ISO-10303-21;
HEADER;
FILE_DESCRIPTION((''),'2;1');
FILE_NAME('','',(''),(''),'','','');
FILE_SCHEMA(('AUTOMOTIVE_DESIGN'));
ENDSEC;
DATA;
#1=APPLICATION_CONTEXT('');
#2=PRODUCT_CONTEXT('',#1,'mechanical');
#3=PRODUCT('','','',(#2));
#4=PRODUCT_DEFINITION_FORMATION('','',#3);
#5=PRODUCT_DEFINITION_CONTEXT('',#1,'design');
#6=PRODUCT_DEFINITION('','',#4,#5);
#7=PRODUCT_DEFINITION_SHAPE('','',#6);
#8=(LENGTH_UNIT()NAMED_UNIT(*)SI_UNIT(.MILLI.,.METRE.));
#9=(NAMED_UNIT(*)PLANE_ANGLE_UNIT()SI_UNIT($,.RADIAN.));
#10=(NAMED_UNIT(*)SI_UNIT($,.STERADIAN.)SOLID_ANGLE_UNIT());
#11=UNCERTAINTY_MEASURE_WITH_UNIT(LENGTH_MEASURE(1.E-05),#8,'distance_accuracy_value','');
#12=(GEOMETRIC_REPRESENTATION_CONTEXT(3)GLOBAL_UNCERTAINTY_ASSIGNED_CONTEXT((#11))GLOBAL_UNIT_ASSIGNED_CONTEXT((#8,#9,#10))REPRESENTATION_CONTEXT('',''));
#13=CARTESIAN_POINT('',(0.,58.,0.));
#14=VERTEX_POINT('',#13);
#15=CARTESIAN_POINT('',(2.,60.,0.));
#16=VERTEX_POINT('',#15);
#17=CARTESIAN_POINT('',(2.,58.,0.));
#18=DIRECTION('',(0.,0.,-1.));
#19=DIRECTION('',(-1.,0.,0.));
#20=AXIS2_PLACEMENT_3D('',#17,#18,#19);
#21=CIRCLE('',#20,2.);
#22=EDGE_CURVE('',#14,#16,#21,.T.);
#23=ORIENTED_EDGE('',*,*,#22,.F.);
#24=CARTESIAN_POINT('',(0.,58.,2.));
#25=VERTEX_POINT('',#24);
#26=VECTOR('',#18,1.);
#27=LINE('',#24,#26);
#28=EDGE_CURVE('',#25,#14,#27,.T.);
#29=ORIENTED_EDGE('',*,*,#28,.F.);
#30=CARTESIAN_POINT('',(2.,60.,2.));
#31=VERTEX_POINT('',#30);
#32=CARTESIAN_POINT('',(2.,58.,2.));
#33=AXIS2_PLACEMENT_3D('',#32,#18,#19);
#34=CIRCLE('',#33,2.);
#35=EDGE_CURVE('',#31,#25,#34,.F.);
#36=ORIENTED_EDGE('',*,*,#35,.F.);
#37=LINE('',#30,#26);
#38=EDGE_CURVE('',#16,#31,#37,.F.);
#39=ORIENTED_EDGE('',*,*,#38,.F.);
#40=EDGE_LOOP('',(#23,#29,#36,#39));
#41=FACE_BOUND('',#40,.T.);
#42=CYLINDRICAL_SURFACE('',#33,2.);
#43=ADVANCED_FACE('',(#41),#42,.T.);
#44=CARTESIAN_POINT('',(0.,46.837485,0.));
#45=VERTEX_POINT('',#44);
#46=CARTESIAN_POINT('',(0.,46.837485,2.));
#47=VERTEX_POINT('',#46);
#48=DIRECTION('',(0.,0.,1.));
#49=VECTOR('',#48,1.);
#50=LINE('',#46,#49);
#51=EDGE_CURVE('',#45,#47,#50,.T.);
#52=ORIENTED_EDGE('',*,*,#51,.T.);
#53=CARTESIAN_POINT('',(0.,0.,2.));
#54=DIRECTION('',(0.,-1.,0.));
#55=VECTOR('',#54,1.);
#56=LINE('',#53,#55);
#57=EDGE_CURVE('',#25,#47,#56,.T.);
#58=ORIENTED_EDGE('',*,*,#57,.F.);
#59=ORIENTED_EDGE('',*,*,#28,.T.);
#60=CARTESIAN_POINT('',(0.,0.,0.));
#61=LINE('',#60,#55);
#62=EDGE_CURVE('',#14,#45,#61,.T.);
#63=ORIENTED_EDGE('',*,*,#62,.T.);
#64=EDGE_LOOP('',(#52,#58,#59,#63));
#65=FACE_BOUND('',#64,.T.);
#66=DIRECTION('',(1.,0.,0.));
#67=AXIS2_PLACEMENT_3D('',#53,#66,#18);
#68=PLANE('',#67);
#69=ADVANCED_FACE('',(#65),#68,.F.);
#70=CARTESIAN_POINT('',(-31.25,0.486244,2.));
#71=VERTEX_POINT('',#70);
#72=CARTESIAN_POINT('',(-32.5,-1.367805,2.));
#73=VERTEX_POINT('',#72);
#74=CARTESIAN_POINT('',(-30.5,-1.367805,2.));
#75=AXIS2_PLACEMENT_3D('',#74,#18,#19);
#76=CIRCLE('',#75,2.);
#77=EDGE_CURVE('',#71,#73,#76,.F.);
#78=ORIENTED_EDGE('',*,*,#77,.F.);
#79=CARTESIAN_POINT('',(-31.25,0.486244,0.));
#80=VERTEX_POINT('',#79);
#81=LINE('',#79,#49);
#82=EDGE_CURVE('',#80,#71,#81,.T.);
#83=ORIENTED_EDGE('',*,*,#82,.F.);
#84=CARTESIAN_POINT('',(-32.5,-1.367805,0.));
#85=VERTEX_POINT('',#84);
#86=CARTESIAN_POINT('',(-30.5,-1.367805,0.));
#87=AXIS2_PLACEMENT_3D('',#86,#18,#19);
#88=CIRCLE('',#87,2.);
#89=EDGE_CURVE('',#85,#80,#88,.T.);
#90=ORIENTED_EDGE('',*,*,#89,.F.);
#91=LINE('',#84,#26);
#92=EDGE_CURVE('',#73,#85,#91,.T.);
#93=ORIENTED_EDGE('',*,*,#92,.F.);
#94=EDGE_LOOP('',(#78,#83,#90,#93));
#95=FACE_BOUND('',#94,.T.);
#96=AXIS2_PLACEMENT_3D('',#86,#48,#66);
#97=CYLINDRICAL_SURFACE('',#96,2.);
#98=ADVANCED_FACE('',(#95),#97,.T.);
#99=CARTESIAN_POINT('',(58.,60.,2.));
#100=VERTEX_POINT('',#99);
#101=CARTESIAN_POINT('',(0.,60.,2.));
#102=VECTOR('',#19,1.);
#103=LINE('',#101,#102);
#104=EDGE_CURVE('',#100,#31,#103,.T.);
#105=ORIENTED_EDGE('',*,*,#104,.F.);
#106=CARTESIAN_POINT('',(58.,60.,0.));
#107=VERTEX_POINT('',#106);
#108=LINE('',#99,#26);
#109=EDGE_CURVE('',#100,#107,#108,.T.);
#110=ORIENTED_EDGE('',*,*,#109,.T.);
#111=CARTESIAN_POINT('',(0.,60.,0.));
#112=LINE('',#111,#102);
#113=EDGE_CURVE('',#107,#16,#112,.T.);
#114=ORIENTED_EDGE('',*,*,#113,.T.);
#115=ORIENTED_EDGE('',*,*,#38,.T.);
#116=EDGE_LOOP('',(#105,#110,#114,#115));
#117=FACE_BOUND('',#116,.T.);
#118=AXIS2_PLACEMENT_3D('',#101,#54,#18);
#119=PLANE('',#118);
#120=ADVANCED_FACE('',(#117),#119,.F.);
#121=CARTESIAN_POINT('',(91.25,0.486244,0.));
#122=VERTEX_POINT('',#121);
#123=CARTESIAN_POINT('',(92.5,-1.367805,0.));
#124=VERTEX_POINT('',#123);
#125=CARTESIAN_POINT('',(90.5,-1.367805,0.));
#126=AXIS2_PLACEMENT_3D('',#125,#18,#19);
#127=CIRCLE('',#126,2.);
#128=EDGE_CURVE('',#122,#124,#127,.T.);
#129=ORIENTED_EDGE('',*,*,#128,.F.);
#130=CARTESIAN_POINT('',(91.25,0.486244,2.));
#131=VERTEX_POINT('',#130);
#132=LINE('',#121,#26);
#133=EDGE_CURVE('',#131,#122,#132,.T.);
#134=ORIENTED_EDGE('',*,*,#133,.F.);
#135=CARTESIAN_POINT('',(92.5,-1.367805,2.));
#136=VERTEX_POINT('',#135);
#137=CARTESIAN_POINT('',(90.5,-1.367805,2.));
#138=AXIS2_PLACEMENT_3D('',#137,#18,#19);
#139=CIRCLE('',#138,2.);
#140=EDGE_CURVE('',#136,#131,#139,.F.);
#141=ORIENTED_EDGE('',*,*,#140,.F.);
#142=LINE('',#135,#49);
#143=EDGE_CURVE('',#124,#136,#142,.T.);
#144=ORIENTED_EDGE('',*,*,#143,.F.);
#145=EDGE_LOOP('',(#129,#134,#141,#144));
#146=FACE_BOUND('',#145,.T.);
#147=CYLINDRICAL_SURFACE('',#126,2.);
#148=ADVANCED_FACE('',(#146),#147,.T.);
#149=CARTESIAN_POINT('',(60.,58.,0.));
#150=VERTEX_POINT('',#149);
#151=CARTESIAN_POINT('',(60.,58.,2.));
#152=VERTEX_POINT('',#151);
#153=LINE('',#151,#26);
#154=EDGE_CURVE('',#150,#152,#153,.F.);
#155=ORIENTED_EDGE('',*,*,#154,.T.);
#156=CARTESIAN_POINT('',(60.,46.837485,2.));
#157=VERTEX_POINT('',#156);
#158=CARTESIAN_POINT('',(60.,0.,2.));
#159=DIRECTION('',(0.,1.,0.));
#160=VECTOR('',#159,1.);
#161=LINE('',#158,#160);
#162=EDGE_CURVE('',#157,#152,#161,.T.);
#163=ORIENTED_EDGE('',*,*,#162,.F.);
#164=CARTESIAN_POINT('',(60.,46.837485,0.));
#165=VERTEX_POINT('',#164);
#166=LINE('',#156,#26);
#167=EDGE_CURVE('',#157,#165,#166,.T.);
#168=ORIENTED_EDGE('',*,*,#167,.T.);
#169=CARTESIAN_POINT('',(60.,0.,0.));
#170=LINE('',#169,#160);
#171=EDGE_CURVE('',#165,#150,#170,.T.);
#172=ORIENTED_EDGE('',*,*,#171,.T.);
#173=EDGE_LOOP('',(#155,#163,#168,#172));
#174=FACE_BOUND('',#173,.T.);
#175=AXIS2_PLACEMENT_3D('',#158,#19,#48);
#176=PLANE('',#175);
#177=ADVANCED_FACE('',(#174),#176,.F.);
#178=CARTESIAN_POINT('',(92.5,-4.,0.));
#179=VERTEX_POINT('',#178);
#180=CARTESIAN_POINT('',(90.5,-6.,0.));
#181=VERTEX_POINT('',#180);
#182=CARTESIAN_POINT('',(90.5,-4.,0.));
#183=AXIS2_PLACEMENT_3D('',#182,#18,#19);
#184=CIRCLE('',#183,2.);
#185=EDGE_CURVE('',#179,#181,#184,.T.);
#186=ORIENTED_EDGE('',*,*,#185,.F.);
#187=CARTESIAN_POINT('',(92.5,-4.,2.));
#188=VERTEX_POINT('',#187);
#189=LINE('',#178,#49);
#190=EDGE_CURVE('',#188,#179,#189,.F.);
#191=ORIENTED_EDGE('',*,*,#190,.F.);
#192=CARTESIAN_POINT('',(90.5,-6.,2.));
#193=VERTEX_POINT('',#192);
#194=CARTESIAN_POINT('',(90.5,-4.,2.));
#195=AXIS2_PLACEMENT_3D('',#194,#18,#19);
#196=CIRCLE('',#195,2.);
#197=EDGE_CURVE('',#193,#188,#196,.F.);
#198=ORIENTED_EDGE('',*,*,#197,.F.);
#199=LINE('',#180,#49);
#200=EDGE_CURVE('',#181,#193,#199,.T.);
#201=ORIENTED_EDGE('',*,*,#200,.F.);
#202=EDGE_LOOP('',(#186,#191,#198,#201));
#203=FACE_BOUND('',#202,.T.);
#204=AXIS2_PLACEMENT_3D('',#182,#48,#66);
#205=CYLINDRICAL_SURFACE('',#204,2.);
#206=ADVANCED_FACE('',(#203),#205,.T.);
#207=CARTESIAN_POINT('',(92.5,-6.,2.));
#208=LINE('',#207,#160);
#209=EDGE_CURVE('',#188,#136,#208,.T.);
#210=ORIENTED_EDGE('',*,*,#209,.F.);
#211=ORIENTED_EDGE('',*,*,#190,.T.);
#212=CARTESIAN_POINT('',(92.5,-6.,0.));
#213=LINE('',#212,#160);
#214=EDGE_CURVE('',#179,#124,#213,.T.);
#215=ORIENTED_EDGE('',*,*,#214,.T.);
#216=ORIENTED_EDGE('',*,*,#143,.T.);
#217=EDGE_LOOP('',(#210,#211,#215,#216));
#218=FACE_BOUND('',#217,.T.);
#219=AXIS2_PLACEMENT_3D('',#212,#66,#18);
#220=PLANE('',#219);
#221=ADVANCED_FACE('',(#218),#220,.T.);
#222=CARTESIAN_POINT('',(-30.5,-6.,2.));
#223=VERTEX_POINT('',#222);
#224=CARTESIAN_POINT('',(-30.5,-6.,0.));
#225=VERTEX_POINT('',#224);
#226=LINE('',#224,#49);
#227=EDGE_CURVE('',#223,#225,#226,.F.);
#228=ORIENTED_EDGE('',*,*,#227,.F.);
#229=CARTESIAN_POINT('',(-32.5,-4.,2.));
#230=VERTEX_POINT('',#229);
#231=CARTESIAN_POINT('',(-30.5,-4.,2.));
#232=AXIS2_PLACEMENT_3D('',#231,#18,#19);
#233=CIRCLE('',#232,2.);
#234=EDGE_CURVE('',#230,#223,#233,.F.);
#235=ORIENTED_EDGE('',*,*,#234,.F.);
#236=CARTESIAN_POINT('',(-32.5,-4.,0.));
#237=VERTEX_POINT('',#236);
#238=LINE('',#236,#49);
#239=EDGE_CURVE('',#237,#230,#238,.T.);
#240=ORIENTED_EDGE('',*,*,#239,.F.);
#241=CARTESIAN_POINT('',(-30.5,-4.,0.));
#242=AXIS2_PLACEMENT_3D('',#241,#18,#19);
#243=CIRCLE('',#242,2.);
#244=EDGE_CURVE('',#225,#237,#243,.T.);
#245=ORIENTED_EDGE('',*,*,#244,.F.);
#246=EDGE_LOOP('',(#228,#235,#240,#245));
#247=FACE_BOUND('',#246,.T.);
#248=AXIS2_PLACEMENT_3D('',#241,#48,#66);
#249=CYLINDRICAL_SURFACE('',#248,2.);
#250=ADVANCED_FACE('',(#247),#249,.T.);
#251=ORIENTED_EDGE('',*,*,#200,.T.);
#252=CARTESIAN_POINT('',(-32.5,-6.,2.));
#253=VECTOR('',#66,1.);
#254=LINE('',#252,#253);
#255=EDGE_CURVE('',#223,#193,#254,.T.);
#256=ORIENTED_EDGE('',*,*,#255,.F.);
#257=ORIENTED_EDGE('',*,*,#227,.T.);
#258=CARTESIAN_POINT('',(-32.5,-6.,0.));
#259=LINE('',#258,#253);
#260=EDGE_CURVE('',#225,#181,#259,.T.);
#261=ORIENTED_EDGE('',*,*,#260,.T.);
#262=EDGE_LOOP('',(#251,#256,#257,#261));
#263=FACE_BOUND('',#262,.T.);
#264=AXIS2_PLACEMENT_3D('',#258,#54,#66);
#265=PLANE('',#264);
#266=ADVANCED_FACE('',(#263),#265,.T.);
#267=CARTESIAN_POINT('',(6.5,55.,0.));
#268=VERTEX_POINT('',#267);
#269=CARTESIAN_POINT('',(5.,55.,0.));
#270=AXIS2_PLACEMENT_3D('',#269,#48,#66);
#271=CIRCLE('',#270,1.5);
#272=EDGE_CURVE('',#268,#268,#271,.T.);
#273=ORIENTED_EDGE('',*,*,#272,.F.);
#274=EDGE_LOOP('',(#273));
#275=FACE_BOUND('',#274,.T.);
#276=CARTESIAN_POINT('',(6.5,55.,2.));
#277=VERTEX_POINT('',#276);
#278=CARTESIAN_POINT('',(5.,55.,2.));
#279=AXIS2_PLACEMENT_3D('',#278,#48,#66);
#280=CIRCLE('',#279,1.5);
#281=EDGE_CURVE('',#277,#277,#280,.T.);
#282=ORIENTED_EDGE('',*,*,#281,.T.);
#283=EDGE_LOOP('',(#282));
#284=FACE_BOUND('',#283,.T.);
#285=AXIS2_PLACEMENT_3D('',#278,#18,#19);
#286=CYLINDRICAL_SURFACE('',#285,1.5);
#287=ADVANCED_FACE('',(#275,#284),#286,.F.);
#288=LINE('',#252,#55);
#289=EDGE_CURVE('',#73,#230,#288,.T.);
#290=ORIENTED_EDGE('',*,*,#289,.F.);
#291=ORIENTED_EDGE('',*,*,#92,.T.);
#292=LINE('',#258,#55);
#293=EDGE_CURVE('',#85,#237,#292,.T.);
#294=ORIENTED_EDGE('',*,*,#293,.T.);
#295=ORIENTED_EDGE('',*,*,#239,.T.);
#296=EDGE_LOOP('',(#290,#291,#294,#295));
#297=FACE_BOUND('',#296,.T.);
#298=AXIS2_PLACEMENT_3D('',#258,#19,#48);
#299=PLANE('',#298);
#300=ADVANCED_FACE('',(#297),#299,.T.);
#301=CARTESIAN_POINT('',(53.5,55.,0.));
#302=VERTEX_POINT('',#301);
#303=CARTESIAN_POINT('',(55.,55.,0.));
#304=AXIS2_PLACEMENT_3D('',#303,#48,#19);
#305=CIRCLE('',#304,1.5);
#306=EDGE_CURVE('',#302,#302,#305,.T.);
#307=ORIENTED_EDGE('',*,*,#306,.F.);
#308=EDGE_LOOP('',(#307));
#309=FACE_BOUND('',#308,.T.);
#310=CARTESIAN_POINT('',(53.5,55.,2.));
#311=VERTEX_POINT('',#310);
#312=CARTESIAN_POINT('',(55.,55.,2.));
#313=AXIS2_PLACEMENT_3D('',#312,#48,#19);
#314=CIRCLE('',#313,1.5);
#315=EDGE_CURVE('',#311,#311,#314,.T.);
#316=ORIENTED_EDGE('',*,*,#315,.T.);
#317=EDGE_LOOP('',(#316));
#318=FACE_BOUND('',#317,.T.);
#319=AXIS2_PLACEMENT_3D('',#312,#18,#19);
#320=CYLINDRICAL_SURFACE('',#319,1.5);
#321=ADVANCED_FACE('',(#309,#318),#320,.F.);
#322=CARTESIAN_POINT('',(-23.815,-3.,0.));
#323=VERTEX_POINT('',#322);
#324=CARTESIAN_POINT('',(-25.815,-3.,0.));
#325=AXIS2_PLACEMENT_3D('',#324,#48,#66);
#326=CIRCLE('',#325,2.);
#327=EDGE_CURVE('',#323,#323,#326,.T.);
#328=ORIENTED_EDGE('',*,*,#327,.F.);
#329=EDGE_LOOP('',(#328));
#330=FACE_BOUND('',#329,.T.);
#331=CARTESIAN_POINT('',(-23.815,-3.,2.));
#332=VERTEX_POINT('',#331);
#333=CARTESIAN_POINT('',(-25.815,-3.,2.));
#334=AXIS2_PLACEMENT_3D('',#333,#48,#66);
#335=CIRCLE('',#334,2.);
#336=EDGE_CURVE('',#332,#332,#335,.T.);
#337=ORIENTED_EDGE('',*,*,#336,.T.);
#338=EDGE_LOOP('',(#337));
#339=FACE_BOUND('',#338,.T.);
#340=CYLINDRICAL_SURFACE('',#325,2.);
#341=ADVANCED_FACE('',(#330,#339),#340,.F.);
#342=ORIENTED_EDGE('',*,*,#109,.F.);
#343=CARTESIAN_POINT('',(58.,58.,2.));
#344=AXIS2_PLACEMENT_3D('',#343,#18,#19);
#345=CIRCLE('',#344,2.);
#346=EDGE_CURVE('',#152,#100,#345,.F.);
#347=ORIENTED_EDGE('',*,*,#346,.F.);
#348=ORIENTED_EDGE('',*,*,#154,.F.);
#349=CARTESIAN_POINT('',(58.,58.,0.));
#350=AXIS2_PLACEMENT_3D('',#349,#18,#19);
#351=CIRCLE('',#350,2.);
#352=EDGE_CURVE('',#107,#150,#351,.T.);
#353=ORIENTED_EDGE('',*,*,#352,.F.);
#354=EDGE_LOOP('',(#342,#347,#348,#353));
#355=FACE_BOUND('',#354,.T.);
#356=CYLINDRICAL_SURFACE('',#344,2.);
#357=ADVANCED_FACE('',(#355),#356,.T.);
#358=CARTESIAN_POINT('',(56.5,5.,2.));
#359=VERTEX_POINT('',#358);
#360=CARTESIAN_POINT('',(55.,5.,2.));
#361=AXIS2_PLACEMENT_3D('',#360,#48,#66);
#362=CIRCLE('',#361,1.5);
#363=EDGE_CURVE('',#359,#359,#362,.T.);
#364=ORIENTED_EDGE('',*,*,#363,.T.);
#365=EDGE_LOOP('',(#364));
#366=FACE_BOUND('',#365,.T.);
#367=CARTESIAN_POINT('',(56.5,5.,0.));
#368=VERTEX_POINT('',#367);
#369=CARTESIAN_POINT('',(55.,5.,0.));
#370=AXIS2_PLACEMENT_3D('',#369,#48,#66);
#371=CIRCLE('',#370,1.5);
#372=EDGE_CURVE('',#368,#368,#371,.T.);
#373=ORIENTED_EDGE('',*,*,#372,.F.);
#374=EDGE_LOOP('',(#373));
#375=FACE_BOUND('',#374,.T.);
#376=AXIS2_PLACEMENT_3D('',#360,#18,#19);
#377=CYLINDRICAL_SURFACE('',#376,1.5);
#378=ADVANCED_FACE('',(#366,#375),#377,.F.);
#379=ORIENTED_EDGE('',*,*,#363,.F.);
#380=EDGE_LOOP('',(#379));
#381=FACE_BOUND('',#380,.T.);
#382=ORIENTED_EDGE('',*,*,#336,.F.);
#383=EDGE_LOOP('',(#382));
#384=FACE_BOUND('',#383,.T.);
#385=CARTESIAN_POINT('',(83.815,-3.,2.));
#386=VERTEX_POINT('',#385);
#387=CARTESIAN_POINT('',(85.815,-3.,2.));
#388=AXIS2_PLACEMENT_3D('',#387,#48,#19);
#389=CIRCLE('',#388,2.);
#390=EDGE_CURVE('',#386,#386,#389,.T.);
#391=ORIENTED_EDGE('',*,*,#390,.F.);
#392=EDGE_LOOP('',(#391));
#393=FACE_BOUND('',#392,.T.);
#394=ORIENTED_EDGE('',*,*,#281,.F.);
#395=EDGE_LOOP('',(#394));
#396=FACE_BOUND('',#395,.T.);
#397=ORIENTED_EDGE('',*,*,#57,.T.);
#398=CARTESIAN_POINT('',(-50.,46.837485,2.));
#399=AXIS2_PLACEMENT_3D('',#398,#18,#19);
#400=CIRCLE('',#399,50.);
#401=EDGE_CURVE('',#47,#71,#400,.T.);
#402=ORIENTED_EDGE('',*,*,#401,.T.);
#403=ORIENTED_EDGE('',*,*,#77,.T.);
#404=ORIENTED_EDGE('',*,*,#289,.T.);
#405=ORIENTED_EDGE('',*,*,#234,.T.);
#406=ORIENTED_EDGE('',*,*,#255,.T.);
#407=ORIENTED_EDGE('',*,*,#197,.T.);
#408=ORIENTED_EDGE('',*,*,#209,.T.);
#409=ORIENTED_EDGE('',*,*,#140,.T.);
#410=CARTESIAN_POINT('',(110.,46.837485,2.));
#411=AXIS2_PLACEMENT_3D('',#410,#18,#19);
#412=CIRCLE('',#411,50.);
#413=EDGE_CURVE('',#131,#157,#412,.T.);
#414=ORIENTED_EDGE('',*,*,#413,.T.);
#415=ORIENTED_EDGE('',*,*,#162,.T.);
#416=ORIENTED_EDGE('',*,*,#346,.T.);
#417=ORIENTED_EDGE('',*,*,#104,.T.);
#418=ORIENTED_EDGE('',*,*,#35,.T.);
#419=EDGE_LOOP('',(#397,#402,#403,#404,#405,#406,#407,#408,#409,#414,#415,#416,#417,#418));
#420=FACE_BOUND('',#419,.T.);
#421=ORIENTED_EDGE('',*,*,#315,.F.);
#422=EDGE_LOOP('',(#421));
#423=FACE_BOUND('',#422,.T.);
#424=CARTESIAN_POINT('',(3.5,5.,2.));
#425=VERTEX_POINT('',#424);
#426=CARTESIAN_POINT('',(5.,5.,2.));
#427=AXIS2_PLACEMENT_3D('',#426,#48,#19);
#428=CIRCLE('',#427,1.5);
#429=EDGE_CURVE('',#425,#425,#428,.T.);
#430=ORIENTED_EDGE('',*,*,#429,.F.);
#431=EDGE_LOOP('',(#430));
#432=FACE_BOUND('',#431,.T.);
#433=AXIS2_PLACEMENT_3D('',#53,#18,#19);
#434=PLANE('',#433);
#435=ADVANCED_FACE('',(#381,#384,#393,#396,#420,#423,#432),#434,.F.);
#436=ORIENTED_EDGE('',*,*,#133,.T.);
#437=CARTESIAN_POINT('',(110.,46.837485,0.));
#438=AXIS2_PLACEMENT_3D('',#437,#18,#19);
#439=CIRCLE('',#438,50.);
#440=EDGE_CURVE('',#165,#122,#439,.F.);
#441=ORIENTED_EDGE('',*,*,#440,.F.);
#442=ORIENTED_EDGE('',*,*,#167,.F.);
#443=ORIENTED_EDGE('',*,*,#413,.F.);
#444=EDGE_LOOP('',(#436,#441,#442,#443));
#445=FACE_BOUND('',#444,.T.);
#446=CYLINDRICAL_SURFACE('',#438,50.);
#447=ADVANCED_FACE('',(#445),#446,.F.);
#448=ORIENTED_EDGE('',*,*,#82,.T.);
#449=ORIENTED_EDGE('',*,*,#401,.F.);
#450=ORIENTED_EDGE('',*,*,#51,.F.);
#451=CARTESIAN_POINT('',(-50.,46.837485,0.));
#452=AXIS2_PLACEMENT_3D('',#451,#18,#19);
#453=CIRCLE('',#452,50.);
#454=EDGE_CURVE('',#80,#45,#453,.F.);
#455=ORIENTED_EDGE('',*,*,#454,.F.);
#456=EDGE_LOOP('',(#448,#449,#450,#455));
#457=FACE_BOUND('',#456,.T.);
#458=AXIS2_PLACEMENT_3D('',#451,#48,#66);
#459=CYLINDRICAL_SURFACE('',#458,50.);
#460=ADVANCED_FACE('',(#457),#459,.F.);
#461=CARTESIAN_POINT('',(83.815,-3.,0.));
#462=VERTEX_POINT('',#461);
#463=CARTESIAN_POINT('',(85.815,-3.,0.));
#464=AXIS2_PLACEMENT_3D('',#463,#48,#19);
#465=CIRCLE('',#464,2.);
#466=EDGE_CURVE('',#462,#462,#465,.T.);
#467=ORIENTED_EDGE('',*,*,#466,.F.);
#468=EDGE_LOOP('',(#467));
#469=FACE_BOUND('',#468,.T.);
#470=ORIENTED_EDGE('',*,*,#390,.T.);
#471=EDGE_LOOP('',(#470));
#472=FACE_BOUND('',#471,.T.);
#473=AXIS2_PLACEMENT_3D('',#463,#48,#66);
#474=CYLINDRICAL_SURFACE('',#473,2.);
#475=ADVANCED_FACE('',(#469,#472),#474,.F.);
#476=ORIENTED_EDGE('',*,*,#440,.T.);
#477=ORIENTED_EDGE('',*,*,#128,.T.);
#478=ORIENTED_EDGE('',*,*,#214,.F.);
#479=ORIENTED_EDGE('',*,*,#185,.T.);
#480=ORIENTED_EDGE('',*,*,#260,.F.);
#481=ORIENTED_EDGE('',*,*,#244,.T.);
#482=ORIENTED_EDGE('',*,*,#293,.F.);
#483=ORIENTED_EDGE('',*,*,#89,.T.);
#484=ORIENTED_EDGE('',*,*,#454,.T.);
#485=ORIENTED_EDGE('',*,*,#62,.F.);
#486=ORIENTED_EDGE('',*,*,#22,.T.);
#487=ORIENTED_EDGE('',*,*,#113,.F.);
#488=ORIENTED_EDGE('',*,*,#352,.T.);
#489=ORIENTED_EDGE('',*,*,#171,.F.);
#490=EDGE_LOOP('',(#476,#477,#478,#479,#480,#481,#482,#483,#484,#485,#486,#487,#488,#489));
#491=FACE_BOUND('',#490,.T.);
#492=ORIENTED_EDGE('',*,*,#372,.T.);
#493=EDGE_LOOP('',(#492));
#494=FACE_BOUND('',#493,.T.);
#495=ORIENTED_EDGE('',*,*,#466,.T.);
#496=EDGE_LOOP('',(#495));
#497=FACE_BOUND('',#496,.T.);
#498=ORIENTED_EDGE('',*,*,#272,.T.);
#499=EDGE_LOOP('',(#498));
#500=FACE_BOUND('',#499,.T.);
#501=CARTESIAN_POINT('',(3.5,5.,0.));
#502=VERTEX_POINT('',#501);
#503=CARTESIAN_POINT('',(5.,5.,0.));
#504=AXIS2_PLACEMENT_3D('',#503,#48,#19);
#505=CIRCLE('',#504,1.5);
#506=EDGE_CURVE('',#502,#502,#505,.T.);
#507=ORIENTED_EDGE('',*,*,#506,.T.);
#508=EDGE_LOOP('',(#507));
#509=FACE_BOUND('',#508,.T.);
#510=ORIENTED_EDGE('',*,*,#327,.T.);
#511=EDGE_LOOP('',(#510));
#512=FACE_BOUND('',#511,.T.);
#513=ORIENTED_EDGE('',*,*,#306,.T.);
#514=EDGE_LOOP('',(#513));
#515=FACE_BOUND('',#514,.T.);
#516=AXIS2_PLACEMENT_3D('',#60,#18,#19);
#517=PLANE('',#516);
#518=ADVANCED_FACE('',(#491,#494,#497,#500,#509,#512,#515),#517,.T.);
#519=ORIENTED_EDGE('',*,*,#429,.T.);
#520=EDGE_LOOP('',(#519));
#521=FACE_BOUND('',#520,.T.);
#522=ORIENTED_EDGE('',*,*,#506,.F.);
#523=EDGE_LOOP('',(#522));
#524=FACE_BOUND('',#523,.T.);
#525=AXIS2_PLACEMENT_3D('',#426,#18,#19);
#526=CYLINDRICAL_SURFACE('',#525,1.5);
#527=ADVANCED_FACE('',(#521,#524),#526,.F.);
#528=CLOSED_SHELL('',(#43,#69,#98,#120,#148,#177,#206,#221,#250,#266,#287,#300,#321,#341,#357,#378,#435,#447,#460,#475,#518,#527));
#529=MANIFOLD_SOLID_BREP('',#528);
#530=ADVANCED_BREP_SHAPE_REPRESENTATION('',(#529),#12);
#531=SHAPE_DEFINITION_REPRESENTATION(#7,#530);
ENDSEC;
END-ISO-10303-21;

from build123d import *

# Parameters (mm, degrees)
SKETCH_1_W      = 60
SKETCH_1_H      = 60
SKETCH_1_R      = 1.5
EXTRUDE_1_DEPTH = 2
SKETCH_2_W      = 125
SKETCH_2_H      = 6
SKETCH_2_R      = 2
EXTRUDE_2_DEPTH = 2
FILLET_1_R      = 50
FILLET_2_R      = 2


with BuildPart() as part:
    # 草图1 → 凸台-拉伸1 (new body)
    with BuildSketch(Plane.XY):
        with Locations((30, 30)):
            Rectangle(SKETCH_1_W, SKETCH_1_H)
        with Locations((5, 55)):
            Circle(SKETCH_1_R, mode=Mode.SUBTRACT)
        with Locations(Location((55, 55, 0), (0, 0, 180))):
            Circle(SKETCH_1_R, mode=Mode.SUBTRACT)
        with Locations((55, 5)):
            Circle(SKETCH_1_R, mode=Mode.SUBTRACT)
        with Locations(Location((5, 5, 0), (0, 0, 180))):
            Circle(SKETCH_1_R, mode=Mode.SUBTRACT)
    extrude(amount=EXTRUDE_1_DEPTH)

    # 草图2 → 凸台-拉伸2 (add)
    with BuildSketch(Plane.XY.offset(2)):
        with Locations((30, -3)):
            Rectangle(SKETCH_2_W, SKETCH_2_H)
        with Locations((-25.815, -3)):
            Circle(SKETCH_2_R, mode=Mode.SUBTRACT)
        with Locations(Location((85.815, -3, 0), (0, 0, 180))):
            Circle(SKETCH_2_R, mode=Mode.SUBTRACT)
    extrude(amount=-EXTRUDE_2_DEPTH)

    # 圆角1
    # the kernel refuses this fillet: 50 mm, written as the material it adds along each edge
    with BuildSketch(Plane(origin=(60, 0, 0), x_dir=(1, 0, 0), z_dir=(0, 0, 1))) as fillet_1_piece_1:
        with BuildLine():
            CenterArc((50, 46.837484988), FILLET_1_R, 180, 69.512684885)
            Line((0, 46.837484988), (-1, 46.837484988))
            Line((-1, 46.837484988), (-1, 0))
            Line((-1, 0), (0, -1))
            ThreePointArc((0, -1), (16.25, -1), (32.15, -0.9367497))
            Line((32.15, -0.9367497), (32.5, 0))
        make_face()
    extrude(amount=2)
    with BuildSketch(Plane(origin=(0, 0, 0), x_dir=(-1, 0, 0), z_dir=(0, 0, 1))) as fillet_1_piece_2:
        with BuildLine():
            CenterArc((50, -46.837484988), FILLET_1_R, 110.487315115, 69.512684885)
            Line((0, -46.837484988), (-1, -46.837484988))
            Line((-1, -46.837484988), (-1, 0))
            Line((-1, 0), (0, 1))
            ThreePointArc((0, 1), (16.25, 1), (32.15, 0.9367497))
            Line((32.15, 0.9367497), (32.5, 0))
        make_face()
    extrude(amount=2)

    # 圆角2
    fillet_2_edges = [part.edges().sort_by_distance(p)[0] for p in [
        (-32.5, -6, 1),
        (-32.5, 0, 1),
        (92.5, 0, 1),
        (92.5, -6, 1),
        (0, 60, 1),
        (60, 60, 1),
    ]]
    fillet(fillet_2_edges, radius=FILLET_2_R)


solid = part.part
